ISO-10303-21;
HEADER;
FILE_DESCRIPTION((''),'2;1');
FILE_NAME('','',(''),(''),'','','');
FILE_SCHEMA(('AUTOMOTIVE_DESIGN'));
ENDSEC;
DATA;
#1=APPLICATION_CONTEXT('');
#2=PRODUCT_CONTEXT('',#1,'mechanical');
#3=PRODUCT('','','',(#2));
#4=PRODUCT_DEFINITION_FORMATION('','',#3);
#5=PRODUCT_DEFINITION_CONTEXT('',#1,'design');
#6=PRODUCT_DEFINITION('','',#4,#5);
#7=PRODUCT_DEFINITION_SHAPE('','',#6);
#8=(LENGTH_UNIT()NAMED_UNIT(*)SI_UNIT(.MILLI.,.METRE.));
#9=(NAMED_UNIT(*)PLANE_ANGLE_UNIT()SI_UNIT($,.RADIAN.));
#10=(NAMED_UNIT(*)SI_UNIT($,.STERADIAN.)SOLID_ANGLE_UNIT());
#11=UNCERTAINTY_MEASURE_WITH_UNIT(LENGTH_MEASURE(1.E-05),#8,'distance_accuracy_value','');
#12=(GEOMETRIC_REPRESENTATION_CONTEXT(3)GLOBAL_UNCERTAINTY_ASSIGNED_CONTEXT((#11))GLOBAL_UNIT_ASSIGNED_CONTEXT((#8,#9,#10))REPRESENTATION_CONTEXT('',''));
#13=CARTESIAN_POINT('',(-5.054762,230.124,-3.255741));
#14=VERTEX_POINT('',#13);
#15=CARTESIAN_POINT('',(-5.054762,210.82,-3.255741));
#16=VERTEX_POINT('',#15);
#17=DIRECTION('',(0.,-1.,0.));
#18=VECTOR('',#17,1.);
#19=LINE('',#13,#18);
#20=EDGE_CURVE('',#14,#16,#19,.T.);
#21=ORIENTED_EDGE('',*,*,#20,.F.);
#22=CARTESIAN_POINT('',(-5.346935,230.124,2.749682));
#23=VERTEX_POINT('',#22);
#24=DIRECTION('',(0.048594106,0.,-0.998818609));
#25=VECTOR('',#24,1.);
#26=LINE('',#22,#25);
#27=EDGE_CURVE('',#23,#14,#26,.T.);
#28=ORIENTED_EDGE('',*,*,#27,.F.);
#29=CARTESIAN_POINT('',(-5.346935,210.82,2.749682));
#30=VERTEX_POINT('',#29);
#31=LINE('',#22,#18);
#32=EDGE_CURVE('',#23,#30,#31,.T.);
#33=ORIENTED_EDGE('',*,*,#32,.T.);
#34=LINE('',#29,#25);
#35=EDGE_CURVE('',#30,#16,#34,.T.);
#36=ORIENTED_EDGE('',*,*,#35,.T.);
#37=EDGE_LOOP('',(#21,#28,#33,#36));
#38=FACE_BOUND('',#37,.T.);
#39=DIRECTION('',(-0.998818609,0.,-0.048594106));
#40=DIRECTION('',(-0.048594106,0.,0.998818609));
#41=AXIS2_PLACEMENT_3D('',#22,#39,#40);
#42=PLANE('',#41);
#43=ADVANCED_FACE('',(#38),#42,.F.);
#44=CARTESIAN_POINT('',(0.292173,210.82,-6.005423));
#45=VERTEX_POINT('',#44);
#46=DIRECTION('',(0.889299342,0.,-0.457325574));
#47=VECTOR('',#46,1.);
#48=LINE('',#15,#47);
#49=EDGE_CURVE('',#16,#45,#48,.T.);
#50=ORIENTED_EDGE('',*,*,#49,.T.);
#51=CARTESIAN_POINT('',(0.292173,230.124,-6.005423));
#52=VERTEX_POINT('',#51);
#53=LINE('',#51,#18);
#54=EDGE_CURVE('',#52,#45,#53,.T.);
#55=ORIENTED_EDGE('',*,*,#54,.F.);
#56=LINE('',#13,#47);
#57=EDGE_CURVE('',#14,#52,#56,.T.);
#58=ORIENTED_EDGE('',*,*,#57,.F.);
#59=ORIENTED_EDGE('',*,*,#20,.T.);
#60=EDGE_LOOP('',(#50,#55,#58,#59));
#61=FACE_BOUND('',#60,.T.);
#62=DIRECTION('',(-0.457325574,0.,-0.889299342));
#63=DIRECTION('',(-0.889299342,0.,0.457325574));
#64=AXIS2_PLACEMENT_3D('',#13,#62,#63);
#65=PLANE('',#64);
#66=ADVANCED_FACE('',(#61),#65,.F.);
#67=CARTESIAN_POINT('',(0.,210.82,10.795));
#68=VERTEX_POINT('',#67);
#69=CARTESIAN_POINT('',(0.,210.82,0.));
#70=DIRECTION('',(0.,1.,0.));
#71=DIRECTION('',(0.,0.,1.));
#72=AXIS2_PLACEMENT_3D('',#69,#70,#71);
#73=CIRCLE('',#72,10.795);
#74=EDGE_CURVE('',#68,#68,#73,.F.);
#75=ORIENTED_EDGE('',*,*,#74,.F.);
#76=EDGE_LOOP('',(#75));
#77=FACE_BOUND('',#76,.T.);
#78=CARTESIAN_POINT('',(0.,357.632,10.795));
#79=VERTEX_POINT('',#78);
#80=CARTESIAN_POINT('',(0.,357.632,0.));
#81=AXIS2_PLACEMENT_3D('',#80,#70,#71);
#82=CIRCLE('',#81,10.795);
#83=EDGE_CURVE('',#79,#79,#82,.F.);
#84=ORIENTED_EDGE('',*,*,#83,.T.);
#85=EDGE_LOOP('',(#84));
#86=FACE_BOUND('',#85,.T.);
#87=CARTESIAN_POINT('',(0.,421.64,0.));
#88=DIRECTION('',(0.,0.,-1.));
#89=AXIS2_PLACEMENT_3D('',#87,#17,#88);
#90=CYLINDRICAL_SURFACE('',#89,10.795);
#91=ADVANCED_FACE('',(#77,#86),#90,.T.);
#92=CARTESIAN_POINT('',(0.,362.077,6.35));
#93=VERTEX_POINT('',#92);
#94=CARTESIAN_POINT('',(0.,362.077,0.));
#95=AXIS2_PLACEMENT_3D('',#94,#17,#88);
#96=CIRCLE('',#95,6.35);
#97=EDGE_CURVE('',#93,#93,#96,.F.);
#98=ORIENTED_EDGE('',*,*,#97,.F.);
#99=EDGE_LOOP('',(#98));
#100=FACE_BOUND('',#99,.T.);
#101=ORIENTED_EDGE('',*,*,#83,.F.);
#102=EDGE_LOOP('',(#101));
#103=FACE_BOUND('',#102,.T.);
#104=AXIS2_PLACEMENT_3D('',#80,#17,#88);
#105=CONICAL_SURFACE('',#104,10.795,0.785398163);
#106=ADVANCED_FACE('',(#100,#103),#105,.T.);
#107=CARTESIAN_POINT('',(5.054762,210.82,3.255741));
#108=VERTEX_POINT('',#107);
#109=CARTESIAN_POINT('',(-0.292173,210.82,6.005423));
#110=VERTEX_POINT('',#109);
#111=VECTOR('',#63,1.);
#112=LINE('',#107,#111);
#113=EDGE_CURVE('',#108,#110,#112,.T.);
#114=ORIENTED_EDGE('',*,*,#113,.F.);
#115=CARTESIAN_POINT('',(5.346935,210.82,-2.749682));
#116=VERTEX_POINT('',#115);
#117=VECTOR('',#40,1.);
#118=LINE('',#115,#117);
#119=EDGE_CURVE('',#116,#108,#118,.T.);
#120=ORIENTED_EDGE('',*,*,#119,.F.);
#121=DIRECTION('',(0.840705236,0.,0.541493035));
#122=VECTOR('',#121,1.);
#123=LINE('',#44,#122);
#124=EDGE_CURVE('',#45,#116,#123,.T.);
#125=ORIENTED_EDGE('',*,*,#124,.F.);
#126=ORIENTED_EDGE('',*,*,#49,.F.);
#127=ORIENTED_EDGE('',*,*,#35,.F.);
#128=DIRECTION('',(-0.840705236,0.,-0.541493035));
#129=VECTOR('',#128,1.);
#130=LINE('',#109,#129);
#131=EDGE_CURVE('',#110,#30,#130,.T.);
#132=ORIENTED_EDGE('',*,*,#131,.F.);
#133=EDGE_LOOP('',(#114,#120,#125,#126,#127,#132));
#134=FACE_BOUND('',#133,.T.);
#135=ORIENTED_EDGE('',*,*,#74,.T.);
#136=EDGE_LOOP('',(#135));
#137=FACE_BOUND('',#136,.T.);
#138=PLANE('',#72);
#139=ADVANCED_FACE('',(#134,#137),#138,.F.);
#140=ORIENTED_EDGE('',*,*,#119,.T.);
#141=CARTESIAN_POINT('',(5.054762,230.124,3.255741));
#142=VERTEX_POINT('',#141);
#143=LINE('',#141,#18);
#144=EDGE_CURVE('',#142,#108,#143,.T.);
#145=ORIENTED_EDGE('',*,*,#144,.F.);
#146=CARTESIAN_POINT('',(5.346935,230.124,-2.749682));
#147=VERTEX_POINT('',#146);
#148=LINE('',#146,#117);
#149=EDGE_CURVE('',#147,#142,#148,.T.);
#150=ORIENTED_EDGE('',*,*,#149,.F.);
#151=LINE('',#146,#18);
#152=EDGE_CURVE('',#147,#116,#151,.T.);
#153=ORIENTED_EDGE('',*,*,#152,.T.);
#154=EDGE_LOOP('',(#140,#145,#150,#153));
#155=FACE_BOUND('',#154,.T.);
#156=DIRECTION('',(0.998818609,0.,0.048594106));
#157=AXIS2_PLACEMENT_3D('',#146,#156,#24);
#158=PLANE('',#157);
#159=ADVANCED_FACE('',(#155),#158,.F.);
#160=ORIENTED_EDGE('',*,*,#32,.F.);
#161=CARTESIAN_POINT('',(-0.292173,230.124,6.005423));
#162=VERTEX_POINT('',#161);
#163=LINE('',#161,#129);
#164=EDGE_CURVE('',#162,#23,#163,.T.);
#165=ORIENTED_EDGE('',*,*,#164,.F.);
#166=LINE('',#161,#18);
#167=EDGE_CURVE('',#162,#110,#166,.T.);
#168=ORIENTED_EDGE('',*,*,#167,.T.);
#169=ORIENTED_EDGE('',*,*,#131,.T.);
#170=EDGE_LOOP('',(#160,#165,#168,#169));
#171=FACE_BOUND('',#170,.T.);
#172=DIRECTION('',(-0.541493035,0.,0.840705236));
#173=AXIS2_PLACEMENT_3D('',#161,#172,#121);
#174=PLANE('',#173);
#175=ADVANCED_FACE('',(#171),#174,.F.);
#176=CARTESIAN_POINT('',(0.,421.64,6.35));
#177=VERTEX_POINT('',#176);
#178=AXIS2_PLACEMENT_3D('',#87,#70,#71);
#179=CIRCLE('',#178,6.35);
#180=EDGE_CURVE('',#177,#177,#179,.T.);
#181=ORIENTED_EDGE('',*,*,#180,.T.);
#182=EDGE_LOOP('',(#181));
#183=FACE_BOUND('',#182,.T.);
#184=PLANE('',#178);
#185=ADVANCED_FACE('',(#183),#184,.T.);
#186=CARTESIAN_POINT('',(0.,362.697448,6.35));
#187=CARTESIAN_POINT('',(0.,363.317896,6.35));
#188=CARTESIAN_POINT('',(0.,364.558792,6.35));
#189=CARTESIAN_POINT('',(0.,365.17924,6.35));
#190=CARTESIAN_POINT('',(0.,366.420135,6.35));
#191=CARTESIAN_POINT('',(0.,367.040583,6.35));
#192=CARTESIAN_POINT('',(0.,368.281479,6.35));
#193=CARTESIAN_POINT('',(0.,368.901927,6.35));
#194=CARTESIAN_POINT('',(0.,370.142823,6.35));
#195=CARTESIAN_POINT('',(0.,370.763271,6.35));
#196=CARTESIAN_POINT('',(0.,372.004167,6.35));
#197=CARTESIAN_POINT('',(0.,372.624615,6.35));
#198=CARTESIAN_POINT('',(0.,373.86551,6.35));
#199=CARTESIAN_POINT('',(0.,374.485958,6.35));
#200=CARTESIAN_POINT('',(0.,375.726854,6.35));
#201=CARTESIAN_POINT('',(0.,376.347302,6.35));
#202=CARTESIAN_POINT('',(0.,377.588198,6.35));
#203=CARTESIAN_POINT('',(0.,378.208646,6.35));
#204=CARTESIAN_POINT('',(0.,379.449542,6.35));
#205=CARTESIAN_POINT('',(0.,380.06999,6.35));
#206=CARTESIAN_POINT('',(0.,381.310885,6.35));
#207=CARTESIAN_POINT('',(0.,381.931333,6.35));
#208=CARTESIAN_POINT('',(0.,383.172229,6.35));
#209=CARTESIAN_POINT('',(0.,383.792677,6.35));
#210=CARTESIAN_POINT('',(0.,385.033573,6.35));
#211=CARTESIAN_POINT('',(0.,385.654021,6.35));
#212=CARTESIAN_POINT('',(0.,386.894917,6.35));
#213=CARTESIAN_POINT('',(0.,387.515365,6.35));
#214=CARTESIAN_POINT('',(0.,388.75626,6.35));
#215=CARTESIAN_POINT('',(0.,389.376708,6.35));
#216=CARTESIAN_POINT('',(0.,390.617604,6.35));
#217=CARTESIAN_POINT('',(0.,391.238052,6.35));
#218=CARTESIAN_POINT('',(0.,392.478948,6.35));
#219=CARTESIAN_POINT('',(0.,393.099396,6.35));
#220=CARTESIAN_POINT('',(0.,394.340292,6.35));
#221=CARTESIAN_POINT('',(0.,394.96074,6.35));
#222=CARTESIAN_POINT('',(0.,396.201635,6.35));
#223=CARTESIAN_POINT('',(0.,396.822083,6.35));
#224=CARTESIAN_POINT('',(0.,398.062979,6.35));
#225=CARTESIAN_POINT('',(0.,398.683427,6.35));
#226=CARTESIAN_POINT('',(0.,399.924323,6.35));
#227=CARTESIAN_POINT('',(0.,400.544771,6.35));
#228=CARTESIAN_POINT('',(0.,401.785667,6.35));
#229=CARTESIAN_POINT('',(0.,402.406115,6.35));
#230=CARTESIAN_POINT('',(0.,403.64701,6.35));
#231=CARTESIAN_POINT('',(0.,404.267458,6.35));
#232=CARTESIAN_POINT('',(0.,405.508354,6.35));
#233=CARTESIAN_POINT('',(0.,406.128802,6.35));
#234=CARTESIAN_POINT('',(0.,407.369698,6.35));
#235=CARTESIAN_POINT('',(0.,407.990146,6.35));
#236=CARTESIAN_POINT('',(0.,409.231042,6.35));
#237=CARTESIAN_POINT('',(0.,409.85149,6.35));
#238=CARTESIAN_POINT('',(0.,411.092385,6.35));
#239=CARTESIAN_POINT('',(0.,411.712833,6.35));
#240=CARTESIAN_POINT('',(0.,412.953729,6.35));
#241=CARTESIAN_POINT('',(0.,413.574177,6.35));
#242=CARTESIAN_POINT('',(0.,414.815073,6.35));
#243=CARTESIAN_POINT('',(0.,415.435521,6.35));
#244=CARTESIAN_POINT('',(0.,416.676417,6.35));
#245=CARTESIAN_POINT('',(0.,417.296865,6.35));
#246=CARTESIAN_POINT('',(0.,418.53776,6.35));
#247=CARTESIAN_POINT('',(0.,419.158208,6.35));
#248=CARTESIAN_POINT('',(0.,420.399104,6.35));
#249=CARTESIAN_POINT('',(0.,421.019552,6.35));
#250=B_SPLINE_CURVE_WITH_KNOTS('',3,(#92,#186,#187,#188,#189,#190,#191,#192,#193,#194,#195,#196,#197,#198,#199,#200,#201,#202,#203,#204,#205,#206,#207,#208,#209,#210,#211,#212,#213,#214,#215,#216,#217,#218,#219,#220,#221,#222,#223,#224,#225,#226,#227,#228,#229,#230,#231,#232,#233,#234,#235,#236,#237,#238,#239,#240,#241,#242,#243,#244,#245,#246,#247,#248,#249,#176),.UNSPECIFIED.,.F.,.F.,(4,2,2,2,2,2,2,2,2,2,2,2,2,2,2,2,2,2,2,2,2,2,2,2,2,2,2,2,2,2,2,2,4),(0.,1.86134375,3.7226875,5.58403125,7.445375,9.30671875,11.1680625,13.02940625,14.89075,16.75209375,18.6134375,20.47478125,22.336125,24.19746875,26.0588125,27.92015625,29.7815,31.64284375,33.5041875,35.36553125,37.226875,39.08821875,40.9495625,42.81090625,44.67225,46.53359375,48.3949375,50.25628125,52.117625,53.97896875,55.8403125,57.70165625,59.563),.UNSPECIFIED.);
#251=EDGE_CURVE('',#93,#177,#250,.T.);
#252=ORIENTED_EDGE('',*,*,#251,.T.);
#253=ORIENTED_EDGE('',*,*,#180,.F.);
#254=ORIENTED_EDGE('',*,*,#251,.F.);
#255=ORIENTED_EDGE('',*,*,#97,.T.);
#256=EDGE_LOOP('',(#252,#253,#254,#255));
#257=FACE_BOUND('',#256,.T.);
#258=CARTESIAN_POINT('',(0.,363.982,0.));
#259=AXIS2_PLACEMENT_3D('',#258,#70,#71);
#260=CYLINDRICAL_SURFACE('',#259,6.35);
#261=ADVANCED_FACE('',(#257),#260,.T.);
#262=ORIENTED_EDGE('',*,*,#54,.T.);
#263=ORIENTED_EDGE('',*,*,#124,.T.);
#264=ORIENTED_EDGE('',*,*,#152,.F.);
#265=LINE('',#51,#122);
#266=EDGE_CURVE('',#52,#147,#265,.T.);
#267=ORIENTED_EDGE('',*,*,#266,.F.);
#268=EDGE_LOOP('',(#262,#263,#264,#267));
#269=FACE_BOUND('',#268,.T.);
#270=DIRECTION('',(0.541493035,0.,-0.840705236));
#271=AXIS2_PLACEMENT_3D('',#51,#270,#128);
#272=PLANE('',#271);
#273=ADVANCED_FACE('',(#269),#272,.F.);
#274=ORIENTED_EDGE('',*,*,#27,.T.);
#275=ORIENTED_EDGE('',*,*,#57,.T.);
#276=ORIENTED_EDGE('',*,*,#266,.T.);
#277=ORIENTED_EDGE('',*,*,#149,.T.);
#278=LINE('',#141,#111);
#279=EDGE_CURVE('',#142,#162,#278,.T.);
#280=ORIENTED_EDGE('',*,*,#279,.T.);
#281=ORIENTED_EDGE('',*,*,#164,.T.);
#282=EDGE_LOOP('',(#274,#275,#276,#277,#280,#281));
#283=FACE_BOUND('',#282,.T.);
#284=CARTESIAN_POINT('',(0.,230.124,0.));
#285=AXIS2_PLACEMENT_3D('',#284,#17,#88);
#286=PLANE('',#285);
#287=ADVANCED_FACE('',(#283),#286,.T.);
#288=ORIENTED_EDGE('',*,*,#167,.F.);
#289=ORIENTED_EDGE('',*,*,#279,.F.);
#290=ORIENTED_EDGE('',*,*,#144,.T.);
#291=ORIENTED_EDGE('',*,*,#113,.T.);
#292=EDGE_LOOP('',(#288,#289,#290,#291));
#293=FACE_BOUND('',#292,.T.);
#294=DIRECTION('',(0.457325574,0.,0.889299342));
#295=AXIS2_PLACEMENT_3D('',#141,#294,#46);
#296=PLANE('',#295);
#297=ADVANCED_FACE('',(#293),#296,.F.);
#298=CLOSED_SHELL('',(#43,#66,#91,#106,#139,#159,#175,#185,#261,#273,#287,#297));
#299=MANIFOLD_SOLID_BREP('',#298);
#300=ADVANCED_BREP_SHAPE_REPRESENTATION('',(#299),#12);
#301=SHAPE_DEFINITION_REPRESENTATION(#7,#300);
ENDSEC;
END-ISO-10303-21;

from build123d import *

# Parameters (mm, degrees)
SKETCH1_R           = 6.35
BOSS_EXTRUDE1_DEPTH = 421.64
SKETCH2_R           = 10.795
BOSS_EXTRUDE2_DEPTH = 421.64
SKETCH3_R           = 25.4
SKETCH3_R_2         = 6.35
CUT_EXTRUDE1_DEPTH  = 52.324
CUT_EXTRUDE2_START  = -57.658
SKETCH4_R           = 25.4
SKETCH4_R_2         = 6.35
CUT_EXTRUDE2_DEPTH  = 57.658
CHAMFER1_SIZE       = 6.35
SKETCH5_R           = 15.875
CUT_EXTRUDE3_DEPTH  = 212.372033273
CUT_EXTRUDE4_DEPTH  = 19.304


with BuildPart() as part:
    # Sketch1 → Boss-Extrude1 (new body)
    with BuildSketch(Plane(origin=(0, 0, 0), x_dir=(1, 0, 0), z_dir=(0, 1, 0))):
        with Locations(Location((0, 0, 0), (0, 0, 270))):
            Circle(SKETCH1_R)
    extrude(amount=BOSS_EXTRUDE1_DEPTH)

    # Sketch2 → Boss-Extrude2 (add)
    with BuildSketch(Plane(origin=(0, 0, 0), x_dir=(-1, 0, 0), z_dir=(0, -1, 0))):
        with Locations(Location((0, 0, 0), (0, 0, 90))):
            Circle(SKETCH2_R)
    extrude(amount=-BOSS_EXTRUDE2_DEPTH)

    # Sketch3 → Cut-Extrude1 (cut)
    with BuildSketch(Plane.XZ):
        Circle(SKETCH3_R)
        with Locations(Location((0, 0, 0), (0, 0, 270))):
            Circle(SKETCH3_R_2, mode=Mode.SUBTRACT)
    extrude(amount=-CUT_EXTRUDE1_DEPTH, mode=Mode.SUBTRACT)

    # Sketch4 → Cut-Extrude2 (cut)
    with BuildSketch(Plane(origin=(0, 421.64, 0), x_dir=(1, 0, 0), z_dir=(0, 1, 0)).offset(CUT_EXTRUDE2_START)):
        Circle(SKETCH4_R)
        with Locations(Location((0, 0, 0), (0, 0, 90))):
            Circle(SKETCH4_R_2, mode=Mode.SUBTRACT)
    extrude(amount=CUT_EXTRUDE2_DEPTH, mode=Mode.SUBTRACT)

    # Chamfer1
    # the kernel refuses this chamfer: 6.35 mm, written as the material it takes off along each edge
    with BuildSketch(Plane(origin=(0, 52.324, 0), x_dir=(0, 0, -1), z_dir=(-1, 0, 0))) as chamfer1_piece_1_section:
        Polygon((10.795, -CHAMFER1_SIZE), (10.795 - CHAMFER1_SIZE, 0), (10.795, 0), align=None)
    chamfer1_piece_1 = revolve(axis=Axis((0, 52.324, 0), (0, -1, 0)), mode=Mode.PRIVATE)
    chamfer1_piece_1 = chamfer1_piece_1 - Plane(origin=(0, 56.4676015, 0), x_dir=(0, 0, -1), z_dir=(0, -1, 0)) * Cylinder(6.35, 44, mode=Mode.PRIVATE)
    add(chamfer1_piece_1, mode=Mode.SUBTRACT)
    with BuildSketch(Plane(origin=(0, 363.982, 0), x_dir=(0, 0, -1), z_dir=(-1, 0, 0))) as chamfer1_piece_2_section:
        Polygon((10.795, CHAMFER1_SIZE), (10.795 - CHAMFER1_SIZE, 0), (10.795, 0), align=None)
    chamfer1_piece_2 = revolve(axis=Axis((0, 363.982, 0), (0, -1, 0)), mode=Mode.PRIVATE)
    chamfer1_piece_2 = chamfer1_piece_2 - Plane(origin=(0, 359.8383985, 0), x_dir=(0, 0, -1), z_dir=(0, -1, 0)) * Cylinder(6.35, 44, mode=Mode.PRIVATE)
    add(chamfer1_piece_2, mode=Mode.SUBTRACT)

    # Sketch5 → Cut-Extrude3 (cut, through all)
    with BuildSketch(Plane(origin=(0, 210.82, 0), x_dir=(1, 0, 0), z_dir=(0, 1, 0))):
        Circle(SKETCH5_R)
    extrude(amount=-CUT_EXTRUDE3_DEPTH, mode=Mode.SUBTRACT)

    # Sketch6 → Cut-Extrude4 (cut)
    with BuildSketch(Plane(origin=(0, 210.82, 0), x_dir=(-1, 0, 0), z_dir=(0, -1, 0))):
        Polygon((-5.054761839, -3.255740788), (0.292173311, -6.005422557), (5.346935151, -2.749681769), (5.054761839, 3.255740788), (-0.292173311, 6.005422557), (-5.346935151, 2.749681769), align=None)
    extrude(amount=-CUT_EXTRUDE4_DEPTH, mode=Mode.SUBTRACT)


solid = part.part
